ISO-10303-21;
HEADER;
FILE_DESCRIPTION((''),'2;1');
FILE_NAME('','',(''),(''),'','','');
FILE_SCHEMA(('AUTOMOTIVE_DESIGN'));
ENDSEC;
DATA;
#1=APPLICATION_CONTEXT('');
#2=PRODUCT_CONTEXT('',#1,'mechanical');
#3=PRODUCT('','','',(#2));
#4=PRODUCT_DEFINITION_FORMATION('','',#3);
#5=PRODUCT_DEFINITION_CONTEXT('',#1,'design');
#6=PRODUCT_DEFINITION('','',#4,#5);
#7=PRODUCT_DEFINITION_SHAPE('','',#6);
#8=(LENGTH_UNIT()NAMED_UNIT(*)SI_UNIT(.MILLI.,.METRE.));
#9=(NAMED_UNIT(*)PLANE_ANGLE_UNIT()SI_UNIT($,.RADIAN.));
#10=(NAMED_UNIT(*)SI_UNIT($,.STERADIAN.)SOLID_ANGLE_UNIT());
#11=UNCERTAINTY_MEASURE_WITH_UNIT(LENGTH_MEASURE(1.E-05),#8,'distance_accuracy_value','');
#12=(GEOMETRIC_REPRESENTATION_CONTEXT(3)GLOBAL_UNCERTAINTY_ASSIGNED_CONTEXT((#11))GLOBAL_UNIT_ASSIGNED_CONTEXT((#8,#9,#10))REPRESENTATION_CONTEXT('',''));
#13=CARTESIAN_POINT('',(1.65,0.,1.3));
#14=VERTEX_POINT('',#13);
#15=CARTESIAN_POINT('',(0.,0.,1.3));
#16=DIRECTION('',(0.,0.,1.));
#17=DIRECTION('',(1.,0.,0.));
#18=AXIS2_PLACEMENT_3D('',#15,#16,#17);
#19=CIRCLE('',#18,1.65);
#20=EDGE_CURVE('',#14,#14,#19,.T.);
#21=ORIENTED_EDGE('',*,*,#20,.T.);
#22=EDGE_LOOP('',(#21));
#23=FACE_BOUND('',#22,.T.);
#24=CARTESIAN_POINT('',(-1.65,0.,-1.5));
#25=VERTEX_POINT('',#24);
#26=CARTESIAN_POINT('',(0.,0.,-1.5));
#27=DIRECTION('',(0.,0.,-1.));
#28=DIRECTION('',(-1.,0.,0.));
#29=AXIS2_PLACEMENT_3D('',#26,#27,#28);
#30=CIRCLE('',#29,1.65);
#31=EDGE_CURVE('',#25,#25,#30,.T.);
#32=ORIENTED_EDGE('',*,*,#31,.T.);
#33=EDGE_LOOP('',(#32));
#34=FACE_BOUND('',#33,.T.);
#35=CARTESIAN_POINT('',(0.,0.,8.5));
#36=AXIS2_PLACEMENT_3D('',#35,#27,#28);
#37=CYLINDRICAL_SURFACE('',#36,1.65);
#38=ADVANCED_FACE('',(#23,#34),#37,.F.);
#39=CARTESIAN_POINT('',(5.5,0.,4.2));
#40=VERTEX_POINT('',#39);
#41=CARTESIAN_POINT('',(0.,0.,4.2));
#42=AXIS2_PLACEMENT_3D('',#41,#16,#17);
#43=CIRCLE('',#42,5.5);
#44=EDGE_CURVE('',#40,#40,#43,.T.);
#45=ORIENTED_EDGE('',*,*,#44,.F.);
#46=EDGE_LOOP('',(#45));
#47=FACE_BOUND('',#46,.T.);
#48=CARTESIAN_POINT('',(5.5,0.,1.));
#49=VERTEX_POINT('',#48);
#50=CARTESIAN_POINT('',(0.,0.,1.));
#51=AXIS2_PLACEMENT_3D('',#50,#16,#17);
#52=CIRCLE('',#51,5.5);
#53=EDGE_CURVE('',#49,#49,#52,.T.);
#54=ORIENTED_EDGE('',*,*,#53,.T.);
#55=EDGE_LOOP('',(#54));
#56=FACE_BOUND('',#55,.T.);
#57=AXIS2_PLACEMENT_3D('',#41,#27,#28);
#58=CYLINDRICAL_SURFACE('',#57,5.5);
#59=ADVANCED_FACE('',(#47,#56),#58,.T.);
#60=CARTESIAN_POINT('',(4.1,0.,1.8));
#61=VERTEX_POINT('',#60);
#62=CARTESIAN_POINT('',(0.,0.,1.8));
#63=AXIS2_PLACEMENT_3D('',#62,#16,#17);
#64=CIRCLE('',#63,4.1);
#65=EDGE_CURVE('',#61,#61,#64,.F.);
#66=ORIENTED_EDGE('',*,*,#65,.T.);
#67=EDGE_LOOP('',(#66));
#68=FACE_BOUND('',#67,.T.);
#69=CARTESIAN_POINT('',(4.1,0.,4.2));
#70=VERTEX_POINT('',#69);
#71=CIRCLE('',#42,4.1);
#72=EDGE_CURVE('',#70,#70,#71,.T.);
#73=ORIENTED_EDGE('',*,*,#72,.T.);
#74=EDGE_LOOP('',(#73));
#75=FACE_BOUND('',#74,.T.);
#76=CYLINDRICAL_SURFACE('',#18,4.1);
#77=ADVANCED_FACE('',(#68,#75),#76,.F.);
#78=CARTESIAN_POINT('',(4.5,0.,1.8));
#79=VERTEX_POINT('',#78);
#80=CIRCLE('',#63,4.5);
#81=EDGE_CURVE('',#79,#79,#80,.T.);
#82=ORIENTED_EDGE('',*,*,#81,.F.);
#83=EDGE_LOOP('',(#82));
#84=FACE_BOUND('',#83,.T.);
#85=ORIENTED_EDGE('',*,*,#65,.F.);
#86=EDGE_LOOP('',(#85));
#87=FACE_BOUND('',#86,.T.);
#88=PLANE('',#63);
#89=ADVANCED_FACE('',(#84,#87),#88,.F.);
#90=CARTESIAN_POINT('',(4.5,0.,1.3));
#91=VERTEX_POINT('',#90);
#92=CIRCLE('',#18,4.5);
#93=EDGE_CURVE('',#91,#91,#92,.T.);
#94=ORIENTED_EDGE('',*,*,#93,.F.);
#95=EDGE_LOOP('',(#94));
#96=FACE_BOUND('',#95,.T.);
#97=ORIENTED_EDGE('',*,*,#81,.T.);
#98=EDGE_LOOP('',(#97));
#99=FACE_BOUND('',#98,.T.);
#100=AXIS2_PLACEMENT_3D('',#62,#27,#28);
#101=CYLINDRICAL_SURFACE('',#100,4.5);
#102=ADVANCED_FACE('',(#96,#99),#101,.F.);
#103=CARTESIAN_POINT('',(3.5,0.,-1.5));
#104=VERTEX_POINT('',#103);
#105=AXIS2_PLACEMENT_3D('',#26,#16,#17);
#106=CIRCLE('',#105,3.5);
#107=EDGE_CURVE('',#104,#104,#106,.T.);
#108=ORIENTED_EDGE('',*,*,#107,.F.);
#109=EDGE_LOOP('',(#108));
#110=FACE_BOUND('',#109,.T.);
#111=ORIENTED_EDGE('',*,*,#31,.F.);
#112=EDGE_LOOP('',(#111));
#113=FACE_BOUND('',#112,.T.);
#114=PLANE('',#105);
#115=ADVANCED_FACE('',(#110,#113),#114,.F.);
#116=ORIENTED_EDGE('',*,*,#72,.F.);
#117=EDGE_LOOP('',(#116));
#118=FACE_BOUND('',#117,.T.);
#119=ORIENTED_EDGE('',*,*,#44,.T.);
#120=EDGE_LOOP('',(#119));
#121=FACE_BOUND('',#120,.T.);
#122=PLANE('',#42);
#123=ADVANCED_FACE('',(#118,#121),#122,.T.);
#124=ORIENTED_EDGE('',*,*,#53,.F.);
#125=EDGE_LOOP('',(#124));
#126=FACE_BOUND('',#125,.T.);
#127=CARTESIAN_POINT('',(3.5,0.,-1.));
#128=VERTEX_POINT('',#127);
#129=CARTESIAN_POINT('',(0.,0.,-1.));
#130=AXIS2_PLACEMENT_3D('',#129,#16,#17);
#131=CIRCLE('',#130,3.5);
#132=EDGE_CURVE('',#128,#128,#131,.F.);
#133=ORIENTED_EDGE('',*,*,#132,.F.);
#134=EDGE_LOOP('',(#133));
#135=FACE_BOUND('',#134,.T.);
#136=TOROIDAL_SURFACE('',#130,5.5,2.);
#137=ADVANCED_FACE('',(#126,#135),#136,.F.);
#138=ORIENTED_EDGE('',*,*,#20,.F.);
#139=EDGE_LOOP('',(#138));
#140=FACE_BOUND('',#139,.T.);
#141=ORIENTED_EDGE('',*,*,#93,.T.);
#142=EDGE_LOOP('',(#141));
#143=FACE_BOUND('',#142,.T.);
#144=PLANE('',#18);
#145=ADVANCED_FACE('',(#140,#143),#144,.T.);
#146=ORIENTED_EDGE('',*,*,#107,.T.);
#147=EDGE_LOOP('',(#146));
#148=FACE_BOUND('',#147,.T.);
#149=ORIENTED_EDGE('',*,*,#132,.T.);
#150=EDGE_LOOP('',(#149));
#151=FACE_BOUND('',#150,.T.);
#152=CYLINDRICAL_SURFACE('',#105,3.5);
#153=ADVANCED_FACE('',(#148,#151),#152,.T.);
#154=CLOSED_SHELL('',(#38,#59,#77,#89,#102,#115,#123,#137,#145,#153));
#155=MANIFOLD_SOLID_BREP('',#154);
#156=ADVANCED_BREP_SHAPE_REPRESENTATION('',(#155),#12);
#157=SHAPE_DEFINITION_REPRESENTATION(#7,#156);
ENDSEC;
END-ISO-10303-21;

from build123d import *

# Parameters (mm, degrees)
BOSS_EXTRUDE1_DEPTH      = 1
BOSS_EXTRUDE1_DEPTH_BACK = 1.5
SKETCH1_R                = 3.5
SKETCH1_R_2              = 1.625
SKETCH2_R                = 5.5
BOSS_EXTRUDE2_DEPTH      = 3.2
SKETCH3_R                = 4.1
CUT_EXTRUDE1_DEPTH       = 2.9
SKETCH4_R                = 1.65
CUT_EXTRUDE2_DEPTH       = 10
FILLET2_R                = 2
SKETCH5_R                = 4.5
CUT_EXTRUDE3_DEPTH       = 0.5


with BuildPart() as part:
    # Sketch1 → Boss-Extrude1 (new, two sides: drawn at the far end of the back side and taken through both)
    with BuildSketch(Plane.XY.offset(-BOSS_EXTRUDE1_DEPTH_BACK)):
        Circle(SKETCH1_R)
        Circle(SKETCH1_R_2, mode=Mode.SUBTRACT)
    extrude(amount=BOSS_EXTRUDE1_DEPTH + BOSS_EXTRUDE1_DEPTH_BACK)

    # Sketch2 → Boss-Extrude2 (add)
    with BuildSketch(Plane.XY.offset(1)):
        Circle(SKETCH2_R)
    extrude(amount=BOSS_EXTRUDE2_DEPTH)

    # Sketch3 → Cut-Extrude1 (cut)
    with BuildSketch(Plane.XY.offset(4.2)):
        Circle(SKETCH3_R)
    extrude(amount=-CUT_EXTRUDE1_DEPTH, mode=Mode.SUBTRACT)

    # Sketch4 → Cut-Extrude2 (cut)
    with BuildSketch(Plane(origin=(0, 0, -1.5), x_dir=(-1, 0, 0), z_dir=(0, 0, -1))):
        Circle(SKETCH4_R)
    extrude(amount=-CUT_EXTRUDE2_DEPTH, mode=Mode.SUBTRACT)

    # Fillet2
    # the kernel refuses this fillet: 2 mm, written as the material it adds along each edge
    with BuildSketch(Plane(origin=(0, 0, 1), x_dir=(1, 0, 0), z_dir=(0, -1, 0))) as fillet2_piece_1:
        with BuildLine():
            CenterArc((3.5 + FILLET2_R, -FILLET2_R), FILLET2_R, 90, 90)
            Line((3.5, -FILLET2_R), (3.5, 0))
            Line((3.5, 0), (3.5 + FILLET2_R, 0))
        make_face()
    revolve(axis=Axis((0, 0, 1), (0, 0, 1)))

    # Sketch5 → Cut-Extrude3 (cut)
    with BuildSketch(Plane.XY.offset(1.3)):
        Circle(SKETCH5_R)
    extrude(amount=CUT_EXTRUDE3_DEPTH, mode=Mode.SUBTRACT)


solid = part.part
